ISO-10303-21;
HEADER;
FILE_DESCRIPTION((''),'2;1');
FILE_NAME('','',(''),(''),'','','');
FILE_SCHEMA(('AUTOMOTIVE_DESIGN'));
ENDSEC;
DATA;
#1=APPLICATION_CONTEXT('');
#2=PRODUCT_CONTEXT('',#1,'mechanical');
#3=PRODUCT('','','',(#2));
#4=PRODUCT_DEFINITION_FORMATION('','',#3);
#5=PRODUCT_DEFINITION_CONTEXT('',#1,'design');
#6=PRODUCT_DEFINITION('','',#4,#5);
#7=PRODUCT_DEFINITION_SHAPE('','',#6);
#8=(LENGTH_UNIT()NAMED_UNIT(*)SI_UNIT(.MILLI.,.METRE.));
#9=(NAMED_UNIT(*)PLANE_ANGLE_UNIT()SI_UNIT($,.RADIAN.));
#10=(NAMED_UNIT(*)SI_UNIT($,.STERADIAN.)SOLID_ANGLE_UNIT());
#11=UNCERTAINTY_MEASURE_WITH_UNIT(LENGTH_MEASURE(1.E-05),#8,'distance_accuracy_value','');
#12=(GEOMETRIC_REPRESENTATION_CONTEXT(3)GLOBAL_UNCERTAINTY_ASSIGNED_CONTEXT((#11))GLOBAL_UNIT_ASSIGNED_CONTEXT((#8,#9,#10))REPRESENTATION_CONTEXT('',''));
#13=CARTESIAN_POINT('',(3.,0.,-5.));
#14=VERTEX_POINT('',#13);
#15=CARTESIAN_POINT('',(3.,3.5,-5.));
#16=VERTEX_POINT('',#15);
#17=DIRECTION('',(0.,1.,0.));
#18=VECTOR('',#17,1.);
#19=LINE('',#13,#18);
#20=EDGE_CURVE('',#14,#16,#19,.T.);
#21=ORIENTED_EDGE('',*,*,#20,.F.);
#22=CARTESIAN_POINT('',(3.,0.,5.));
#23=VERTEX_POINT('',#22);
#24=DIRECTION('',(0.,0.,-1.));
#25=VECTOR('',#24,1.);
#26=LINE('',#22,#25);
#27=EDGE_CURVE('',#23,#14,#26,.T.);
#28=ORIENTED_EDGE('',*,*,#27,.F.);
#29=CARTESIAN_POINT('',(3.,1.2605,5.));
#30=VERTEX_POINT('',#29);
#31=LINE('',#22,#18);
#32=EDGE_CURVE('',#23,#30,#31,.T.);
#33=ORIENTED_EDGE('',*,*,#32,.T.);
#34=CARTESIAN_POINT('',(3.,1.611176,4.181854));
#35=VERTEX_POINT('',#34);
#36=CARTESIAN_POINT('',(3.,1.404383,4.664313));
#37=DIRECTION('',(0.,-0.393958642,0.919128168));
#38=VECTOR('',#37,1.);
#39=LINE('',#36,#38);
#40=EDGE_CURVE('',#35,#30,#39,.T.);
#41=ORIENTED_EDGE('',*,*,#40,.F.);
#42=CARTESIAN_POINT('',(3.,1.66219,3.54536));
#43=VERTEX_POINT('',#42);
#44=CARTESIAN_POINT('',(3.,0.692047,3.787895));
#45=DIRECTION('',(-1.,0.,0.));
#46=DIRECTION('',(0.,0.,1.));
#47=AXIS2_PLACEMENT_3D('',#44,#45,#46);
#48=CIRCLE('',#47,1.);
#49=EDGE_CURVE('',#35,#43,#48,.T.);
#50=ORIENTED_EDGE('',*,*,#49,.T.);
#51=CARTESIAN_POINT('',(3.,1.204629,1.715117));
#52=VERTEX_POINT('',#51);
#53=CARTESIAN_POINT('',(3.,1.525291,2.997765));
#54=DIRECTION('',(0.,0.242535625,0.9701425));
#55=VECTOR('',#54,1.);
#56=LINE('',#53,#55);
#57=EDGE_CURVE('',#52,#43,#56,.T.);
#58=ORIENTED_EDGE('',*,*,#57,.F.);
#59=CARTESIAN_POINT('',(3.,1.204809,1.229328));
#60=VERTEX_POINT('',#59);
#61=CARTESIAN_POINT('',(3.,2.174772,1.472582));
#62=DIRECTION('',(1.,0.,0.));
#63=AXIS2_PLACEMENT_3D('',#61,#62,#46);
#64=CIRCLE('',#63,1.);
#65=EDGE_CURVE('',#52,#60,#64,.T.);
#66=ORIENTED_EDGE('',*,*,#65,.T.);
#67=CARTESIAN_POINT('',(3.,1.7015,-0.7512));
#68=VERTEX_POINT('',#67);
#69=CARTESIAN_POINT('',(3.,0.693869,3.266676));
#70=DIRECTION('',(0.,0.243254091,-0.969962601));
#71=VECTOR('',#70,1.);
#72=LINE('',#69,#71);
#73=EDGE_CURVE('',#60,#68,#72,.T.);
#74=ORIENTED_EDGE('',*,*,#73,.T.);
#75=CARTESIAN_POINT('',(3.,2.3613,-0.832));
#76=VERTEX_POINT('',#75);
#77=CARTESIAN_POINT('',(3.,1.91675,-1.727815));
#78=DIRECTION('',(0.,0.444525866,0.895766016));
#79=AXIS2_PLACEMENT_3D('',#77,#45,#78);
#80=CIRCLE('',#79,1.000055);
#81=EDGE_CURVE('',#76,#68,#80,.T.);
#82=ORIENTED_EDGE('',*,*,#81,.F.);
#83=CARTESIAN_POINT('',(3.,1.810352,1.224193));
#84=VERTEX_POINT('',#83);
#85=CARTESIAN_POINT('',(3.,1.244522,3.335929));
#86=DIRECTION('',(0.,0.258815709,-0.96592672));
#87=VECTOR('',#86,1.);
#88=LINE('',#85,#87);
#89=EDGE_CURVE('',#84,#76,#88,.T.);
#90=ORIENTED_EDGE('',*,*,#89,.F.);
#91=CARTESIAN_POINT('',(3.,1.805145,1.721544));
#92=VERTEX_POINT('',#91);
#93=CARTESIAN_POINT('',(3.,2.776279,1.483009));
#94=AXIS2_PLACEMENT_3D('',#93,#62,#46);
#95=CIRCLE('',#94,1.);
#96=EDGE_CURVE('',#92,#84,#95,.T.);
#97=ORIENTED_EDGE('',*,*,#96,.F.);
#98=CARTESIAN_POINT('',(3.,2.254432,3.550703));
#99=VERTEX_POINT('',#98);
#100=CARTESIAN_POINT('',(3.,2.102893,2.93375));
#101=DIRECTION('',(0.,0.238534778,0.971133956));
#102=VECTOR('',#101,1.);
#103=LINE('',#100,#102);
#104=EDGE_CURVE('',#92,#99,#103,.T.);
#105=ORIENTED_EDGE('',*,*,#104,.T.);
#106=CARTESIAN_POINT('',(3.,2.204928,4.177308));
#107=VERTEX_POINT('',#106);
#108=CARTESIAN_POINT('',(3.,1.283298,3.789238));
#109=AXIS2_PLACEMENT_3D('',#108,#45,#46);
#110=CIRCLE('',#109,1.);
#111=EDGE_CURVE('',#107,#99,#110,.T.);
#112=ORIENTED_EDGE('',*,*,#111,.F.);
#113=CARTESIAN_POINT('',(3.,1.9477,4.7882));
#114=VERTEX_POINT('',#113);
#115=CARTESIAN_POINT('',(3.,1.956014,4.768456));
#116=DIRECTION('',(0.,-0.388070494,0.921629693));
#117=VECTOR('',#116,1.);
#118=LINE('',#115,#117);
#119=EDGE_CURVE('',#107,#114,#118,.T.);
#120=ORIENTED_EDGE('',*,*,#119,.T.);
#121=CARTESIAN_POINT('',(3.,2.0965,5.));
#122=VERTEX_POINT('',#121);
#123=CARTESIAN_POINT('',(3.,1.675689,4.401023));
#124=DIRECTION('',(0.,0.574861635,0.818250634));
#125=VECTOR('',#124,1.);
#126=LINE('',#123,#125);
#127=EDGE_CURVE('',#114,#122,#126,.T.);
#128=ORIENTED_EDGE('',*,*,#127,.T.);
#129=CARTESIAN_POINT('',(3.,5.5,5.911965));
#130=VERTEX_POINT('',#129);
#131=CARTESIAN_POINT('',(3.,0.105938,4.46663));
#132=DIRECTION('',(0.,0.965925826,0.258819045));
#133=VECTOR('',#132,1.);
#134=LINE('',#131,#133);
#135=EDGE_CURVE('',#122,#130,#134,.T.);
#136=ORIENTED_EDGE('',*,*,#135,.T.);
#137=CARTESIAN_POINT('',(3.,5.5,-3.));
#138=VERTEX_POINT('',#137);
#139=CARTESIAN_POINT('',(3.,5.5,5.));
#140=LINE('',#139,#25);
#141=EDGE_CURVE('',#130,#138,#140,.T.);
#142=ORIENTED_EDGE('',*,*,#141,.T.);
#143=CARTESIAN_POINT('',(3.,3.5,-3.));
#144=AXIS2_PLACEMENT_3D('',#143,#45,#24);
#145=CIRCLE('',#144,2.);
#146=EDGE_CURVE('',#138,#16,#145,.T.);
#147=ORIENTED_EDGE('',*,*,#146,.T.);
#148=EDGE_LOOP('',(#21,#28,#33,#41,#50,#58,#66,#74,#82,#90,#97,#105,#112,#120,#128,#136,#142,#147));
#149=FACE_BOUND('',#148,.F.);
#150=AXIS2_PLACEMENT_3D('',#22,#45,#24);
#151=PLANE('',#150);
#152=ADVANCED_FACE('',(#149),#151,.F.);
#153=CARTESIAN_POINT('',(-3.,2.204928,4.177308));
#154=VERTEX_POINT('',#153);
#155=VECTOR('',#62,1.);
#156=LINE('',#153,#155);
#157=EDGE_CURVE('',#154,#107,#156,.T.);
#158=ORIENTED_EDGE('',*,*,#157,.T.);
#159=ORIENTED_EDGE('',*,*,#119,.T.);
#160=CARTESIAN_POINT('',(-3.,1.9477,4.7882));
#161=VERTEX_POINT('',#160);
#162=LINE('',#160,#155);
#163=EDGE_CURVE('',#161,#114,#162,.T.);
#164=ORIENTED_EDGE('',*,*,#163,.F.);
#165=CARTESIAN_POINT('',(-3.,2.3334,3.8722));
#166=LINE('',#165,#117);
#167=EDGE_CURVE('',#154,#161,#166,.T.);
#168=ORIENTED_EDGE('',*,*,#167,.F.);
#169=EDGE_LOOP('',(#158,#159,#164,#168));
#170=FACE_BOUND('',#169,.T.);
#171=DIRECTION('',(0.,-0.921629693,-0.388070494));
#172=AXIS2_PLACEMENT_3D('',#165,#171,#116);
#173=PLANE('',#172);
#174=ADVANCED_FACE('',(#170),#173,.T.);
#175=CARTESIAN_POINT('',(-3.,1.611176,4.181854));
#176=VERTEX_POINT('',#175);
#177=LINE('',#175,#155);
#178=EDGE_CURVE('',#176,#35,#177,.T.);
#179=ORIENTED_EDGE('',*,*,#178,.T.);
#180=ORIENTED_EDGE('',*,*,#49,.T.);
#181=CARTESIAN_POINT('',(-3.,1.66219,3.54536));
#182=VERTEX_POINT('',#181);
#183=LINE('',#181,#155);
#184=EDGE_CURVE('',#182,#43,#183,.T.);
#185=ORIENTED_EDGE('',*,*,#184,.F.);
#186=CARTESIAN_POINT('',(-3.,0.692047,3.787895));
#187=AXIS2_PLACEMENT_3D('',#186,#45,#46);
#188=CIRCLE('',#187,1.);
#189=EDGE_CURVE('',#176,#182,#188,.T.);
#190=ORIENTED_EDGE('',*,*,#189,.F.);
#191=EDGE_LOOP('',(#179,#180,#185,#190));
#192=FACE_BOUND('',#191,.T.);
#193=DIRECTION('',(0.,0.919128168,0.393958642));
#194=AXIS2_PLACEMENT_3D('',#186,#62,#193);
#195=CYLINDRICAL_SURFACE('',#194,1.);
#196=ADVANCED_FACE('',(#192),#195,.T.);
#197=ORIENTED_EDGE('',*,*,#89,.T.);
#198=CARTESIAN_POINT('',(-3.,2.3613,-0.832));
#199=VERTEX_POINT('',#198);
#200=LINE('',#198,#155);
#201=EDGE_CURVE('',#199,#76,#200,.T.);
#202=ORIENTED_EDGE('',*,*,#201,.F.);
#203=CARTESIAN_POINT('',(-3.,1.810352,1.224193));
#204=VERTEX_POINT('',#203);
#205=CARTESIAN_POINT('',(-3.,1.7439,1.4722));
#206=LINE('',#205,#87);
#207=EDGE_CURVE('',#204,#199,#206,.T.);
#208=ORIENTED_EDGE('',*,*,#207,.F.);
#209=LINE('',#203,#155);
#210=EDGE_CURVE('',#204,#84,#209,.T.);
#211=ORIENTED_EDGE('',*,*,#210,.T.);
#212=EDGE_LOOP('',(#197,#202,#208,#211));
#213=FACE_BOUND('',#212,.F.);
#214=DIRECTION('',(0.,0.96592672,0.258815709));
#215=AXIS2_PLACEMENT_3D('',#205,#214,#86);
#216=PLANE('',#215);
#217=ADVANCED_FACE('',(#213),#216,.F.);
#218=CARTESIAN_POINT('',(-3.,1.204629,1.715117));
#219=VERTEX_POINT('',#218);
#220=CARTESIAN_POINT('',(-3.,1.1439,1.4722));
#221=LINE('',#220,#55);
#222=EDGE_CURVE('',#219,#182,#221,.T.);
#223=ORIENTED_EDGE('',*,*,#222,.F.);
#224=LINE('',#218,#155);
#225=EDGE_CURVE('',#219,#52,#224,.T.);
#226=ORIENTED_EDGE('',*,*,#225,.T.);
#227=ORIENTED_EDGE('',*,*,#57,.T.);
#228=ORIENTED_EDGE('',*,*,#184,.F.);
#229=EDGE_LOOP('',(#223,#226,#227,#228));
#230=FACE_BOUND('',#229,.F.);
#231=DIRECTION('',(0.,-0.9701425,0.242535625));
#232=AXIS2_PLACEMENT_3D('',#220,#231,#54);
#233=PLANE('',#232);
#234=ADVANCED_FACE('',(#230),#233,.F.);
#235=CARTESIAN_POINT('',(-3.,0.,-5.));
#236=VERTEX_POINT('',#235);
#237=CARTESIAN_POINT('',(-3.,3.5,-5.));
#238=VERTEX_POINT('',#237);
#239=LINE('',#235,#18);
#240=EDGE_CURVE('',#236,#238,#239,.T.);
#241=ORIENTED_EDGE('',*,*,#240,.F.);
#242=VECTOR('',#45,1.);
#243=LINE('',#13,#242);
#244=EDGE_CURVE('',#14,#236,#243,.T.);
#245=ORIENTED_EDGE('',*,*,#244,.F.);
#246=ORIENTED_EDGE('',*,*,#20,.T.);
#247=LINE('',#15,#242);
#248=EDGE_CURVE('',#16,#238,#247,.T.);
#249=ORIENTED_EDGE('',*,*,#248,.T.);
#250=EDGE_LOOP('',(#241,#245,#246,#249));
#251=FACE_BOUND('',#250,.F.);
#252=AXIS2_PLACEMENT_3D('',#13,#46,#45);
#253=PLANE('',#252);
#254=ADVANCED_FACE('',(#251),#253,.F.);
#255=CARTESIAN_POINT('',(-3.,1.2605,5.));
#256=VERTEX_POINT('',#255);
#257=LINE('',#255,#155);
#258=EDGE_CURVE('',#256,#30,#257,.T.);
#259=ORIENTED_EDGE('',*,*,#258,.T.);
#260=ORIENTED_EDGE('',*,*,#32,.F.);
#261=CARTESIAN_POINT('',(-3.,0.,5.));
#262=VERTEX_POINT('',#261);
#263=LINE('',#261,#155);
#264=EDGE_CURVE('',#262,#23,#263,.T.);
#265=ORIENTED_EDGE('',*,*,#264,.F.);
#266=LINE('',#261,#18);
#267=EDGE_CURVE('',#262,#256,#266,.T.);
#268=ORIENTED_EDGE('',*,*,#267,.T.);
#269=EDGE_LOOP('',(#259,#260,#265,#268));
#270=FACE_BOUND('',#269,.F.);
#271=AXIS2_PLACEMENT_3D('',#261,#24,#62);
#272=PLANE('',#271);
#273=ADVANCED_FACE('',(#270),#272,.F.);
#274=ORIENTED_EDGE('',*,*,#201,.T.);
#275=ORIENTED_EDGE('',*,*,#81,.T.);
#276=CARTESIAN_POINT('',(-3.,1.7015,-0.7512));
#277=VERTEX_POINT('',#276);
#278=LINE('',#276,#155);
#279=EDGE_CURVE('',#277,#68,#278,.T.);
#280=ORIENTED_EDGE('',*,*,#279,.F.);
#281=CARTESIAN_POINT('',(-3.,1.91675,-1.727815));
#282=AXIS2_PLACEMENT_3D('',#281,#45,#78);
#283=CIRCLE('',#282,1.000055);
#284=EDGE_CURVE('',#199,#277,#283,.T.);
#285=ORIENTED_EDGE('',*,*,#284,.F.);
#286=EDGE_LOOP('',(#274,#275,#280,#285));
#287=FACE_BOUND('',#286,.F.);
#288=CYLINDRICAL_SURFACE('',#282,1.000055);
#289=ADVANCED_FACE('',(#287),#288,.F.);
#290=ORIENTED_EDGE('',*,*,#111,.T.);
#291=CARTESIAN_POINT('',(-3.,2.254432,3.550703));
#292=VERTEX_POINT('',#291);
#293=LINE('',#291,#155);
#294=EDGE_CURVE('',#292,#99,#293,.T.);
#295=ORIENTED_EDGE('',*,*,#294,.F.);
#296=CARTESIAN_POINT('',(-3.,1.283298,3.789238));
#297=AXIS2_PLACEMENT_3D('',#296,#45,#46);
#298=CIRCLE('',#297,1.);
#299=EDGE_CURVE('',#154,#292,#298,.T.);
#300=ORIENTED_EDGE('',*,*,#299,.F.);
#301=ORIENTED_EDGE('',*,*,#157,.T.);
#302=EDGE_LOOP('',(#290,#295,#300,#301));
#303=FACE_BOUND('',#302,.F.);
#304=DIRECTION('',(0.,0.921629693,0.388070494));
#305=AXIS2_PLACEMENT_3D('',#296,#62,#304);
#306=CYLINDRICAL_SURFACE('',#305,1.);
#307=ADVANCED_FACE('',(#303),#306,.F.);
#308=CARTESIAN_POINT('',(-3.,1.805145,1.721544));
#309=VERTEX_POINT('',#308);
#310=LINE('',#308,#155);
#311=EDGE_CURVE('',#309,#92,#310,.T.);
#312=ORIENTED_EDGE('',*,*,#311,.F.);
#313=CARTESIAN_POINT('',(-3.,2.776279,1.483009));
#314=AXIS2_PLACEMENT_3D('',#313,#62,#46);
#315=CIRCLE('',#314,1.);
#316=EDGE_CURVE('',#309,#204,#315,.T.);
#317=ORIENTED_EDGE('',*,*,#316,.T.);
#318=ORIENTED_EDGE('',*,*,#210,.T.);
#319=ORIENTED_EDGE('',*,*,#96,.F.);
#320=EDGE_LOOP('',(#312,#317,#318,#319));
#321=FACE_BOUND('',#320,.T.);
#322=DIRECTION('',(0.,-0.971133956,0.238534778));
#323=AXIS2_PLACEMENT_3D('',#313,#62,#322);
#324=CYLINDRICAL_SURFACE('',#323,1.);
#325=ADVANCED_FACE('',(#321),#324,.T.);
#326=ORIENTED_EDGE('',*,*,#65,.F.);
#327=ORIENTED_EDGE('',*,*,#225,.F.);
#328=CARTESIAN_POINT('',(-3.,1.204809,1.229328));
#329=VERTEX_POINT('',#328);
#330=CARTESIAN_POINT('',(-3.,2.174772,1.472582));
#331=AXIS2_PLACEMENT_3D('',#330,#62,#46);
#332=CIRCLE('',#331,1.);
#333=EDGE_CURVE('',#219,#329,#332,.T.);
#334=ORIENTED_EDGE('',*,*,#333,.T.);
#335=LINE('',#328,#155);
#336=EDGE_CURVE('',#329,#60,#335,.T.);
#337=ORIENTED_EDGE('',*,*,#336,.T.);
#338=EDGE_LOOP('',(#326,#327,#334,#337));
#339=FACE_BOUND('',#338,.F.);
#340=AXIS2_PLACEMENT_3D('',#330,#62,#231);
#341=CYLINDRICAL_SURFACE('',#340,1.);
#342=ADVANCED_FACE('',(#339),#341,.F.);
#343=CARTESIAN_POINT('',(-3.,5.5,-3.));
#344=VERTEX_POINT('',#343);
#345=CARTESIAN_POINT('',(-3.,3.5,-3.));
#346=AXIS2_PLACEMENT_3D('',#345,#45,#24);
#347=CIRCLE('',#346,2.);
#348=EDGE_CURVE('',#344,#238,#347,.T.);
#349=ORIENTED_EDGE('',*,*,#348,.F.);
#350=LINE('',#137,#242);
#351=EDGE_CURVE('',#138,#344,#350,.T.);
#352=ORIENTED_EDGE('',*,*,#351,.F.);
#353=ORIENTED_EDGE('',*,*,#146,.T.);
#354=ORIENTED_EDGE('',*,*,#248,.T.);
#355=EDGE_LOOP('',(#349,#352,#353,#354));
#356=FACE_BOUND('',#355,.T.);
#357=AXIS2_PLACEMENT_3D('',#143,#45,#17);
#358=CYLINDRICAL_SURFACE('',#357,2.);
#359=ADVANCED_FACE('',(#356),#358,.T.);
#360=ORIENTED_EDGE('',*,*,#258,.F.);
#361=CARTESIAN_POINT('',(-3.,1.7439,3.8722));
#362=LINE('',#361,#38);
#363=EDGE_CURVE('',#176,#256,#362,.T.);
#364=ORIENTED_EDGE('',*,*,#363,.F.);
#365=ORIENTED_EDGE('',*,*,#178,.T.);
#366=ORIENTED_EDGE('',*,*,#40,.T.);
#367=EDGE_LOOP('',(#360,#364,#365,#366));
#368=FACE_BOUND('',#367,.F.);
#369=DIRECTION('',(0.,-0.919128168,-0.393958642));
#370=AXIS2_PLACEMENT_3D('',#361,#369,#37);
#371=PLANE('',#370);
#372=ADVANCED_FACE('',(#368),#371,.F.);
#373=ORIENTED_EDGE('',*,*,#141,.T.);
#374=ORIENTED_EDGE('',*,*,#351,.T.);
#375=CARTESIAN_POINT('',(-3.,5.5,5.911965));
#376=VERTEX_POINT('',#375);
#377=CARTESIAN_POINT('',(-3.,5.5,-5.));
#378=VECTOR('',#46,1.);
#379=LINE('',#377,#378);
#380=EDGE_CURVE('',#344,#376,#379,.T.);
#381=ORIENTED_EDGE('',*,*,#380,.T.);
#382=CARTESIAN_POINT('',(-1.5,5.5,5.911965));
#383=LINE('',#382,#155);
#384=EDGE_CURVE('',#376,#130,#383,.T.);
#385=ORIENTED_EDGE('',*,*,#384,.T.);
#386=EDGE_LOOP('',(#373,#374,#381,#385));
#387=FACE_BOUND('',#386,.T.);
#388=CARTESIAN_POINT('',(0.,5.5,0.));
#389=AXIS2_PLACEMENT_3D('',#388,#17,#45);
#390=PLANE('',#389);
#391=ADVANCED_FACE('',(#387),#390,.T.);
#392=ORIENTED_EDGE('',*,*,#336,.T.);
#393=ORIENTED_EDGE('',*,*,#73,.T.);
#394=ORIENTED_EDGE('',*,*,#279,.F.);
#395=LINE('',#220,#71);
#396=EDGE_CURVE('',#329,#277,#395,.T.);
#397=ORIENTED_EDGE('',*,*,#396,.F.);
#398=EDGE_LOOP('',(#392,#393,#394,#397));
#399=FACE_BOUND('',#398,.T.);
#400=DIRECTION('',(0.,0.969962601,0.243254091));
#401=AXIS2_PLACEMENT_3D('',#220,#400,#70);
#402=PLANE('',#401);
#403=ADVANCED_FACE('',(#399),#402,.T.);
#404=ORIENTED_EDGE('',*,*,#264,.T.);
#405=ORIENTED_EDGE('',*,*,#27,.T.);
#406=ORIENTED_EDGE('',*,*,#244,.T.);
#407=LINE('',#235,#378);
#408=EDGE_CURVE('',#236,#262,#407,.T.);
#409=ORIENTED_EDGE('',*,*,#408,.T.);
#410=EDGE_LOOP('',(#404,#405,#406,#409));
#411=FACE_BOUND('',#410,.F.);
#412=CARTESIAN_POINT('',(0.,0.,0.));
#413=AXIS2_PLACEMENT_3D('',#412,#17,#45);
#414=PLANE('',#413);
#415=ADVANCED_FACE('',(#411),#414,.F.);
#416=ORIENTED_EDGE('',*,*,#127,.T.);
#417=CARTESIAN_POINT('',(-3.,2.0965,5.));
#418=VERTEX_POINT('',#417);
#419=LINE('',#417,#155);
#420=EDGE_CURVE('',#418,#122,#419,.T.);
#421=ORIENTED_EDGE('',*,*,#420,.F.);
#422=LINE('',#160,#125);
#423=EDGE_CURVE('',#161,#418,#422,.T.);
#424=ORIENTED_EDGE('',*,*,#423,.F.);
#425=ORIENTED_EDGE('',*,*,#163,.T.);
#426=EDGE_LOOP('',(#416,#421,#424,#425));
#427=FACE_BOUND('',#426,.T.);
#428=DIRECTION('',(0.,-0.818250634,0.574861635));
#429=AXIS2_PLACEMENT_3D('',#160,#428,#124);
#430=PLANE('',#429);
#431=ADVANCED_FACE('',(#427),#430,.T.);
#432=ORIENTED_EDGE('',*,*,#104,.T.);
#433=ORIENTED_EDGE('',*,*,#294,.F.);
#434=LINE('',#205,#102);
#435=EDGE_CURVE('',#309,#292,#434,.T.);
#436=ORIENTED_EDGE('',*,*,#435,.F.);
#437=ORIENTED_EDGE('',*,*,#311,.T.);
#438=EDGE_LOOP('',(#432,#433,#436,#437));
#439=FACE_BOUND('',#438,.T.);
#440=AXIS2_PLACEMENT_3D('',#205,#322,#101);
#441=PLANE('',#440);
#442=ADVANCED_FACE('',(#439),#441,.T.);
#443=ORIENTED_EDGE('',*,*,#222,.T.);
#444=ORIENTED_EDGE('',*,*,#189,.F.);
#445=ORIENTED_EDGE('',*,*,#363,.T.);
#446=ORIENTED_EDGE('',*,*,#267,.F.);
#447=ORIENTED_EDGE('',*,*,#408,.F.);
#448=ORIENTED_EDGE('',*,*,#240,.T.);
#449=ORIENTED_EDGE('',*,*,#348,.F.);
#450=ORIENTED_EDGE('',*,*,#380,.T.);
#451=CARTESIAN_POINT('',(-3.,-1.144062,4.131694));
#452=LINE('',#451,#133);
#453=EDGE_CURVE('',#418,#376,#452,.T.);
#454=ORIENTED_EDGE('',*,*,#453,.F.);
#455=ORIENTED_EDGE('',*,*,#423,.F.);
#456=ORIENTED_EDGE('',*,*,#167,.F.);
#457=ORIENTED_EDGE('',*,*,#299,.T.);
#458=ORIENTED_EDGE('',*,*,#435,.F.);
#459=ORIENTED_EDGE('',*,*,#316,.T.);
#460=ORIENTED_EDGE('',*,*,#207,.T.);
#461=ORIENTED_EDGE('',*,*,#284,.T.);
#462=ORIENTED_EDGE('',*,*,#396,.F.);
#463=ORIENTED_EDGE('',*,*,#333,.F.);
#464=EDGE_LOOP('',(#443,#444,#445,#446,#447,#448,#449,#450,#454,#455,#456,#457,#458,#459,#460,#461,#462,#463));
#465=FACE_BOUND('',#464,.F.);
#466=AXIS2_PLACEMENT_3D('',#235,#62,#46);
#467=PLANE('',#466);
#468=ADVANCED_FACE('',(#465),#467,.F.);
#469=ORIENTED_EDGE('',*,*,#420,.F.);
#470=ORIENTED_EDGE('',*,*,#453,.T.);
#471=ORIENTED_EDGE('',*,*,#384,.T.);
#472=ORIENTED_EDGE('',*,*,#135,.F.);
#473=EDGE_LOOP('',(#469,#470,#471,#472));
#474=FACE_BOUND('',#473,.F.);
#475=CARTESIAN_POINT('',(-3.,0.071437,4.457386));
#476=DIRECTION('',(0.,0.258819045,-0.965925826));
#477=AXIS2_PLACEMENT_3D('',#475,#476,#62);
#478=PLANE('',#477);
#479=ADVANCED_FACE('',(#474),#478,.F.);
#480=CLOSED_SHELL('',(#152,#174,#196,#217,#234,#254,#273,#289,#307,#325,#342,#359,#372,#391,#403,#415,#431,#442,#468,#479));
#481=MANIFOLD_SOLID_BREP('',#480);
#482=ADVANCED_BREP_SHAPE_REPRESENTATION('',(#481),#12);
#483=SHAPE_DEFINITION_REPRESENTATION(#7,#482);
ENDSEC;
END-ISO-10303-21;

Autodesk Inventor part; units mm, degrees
ref_plane "YZ Plane" through (0, 0, 0) normal (1, 0, 0) x (0, 1, 0)
ref_plane "XZ Plane" through (0, 0, 0) normal (0, 1, 0) x (-1, 0, 0)
ref_plane "XY Plane" through (0, 0, 0) normal (0, 0, 1) x (1, 0, 0)
sketch "Sketch1" plane through (0, 0, 0) normal (0, 1, 0) x (-1, 0, 0)
  line L0 (3, 5) -> (-3, 5)
  line L1 (-3, 5) -> (-3, -5)
  line L2 (-3, -5) -> (3, -5)
  line L3 (3, -5) -> (3, 5)
  line L4 (3, 5) -> (-3, -5) construction
  line L5 (-3, 5) -> (3, -5) construction
  point P0 (0, 0)
  dimension "d0" = 6
  dimension "d1" = 10
extrude "Extrusion1" add sketch "Sketch1" along normal blind 5.5
sketch "Sketch2" plane through (-3, 0, -5) normal (-1, 0, 0) x (0, 0, 1)
  line L0 (0, 0) -> (0, 5.5) projected
  line L1 (0, 5.5) -> (10, 5.5) projected
  line L2 (5, 0) -> (6.2, 0)
  line L3 (0, 0) -> (10, 0) projected
  line L4 (6.2, 0) -> (7.4, 0)
  line L5 (7.4, 0) -> (8.6, 0)
  line L6 (6.4722, 1.7439) -> (8.8722, 2.3334)
  line L7 (8.8722, 2.3334) -> (9.7882, 1.9477)
  line L8 (6.4722, 1.7439) -> (6.4722, 1.1439)
  line L9 (6.4722, 1.1439) -> (4.2488, 1.7015)
  line L10 (6.4722, 1.1439) -> (8.8722, 1.7439)
  line L11 (8.8722, 1.7439) -> (10, 1.2605)
  arc A0 (4.168, 2.3613) -> (4.2488, 1.7015) centre (3.2722, 1.9167) ccw
  line L12 (6.4722, 1.7439) -> (4.168, 2.3613)
  line L13 (6.4722, 1.7439) -> (8.8578, 1.7439) construction
  line L14 (9.7882, 1.9477) -> (10, 2.0965)
  line L15 (10, 0) -> (10, 5.5) projected
  line L16 (10, 2.0965) -> (10, 1.2605)
  point P0 (10.2722, 1.9167)
  dimension "d8" = 1.2
  dimension "d9" = 1.2
  dimension "d10" = 1.2
  dimension "d17" = 0.6
  dimension "d19" = 2
  dimension "d20" = 165
extrude "Extrusion2" cut sketch "Sketch2" against normal blind 6.5 contours L15 L11 L10 L8 L6 L7 L14 | L8 L9 A0 L12
fillet "Fillet2" radius 2 1 edges at (0, 5.5, -5)
fillet "Fillet3" radius 1 4 edges at (0, 1.7439, 3.8722) (0, 1.7439, 1.4722) (0, 1.1439, 1.4722) (0, 2.3334, 3.8722)
draft "FaceDraft2" angle 15 pull direction (0, -1, 0) faces at (-1, 3.231, 5) fixed edges at (0, 2.0965, 5)
properties part number "BagClip"
